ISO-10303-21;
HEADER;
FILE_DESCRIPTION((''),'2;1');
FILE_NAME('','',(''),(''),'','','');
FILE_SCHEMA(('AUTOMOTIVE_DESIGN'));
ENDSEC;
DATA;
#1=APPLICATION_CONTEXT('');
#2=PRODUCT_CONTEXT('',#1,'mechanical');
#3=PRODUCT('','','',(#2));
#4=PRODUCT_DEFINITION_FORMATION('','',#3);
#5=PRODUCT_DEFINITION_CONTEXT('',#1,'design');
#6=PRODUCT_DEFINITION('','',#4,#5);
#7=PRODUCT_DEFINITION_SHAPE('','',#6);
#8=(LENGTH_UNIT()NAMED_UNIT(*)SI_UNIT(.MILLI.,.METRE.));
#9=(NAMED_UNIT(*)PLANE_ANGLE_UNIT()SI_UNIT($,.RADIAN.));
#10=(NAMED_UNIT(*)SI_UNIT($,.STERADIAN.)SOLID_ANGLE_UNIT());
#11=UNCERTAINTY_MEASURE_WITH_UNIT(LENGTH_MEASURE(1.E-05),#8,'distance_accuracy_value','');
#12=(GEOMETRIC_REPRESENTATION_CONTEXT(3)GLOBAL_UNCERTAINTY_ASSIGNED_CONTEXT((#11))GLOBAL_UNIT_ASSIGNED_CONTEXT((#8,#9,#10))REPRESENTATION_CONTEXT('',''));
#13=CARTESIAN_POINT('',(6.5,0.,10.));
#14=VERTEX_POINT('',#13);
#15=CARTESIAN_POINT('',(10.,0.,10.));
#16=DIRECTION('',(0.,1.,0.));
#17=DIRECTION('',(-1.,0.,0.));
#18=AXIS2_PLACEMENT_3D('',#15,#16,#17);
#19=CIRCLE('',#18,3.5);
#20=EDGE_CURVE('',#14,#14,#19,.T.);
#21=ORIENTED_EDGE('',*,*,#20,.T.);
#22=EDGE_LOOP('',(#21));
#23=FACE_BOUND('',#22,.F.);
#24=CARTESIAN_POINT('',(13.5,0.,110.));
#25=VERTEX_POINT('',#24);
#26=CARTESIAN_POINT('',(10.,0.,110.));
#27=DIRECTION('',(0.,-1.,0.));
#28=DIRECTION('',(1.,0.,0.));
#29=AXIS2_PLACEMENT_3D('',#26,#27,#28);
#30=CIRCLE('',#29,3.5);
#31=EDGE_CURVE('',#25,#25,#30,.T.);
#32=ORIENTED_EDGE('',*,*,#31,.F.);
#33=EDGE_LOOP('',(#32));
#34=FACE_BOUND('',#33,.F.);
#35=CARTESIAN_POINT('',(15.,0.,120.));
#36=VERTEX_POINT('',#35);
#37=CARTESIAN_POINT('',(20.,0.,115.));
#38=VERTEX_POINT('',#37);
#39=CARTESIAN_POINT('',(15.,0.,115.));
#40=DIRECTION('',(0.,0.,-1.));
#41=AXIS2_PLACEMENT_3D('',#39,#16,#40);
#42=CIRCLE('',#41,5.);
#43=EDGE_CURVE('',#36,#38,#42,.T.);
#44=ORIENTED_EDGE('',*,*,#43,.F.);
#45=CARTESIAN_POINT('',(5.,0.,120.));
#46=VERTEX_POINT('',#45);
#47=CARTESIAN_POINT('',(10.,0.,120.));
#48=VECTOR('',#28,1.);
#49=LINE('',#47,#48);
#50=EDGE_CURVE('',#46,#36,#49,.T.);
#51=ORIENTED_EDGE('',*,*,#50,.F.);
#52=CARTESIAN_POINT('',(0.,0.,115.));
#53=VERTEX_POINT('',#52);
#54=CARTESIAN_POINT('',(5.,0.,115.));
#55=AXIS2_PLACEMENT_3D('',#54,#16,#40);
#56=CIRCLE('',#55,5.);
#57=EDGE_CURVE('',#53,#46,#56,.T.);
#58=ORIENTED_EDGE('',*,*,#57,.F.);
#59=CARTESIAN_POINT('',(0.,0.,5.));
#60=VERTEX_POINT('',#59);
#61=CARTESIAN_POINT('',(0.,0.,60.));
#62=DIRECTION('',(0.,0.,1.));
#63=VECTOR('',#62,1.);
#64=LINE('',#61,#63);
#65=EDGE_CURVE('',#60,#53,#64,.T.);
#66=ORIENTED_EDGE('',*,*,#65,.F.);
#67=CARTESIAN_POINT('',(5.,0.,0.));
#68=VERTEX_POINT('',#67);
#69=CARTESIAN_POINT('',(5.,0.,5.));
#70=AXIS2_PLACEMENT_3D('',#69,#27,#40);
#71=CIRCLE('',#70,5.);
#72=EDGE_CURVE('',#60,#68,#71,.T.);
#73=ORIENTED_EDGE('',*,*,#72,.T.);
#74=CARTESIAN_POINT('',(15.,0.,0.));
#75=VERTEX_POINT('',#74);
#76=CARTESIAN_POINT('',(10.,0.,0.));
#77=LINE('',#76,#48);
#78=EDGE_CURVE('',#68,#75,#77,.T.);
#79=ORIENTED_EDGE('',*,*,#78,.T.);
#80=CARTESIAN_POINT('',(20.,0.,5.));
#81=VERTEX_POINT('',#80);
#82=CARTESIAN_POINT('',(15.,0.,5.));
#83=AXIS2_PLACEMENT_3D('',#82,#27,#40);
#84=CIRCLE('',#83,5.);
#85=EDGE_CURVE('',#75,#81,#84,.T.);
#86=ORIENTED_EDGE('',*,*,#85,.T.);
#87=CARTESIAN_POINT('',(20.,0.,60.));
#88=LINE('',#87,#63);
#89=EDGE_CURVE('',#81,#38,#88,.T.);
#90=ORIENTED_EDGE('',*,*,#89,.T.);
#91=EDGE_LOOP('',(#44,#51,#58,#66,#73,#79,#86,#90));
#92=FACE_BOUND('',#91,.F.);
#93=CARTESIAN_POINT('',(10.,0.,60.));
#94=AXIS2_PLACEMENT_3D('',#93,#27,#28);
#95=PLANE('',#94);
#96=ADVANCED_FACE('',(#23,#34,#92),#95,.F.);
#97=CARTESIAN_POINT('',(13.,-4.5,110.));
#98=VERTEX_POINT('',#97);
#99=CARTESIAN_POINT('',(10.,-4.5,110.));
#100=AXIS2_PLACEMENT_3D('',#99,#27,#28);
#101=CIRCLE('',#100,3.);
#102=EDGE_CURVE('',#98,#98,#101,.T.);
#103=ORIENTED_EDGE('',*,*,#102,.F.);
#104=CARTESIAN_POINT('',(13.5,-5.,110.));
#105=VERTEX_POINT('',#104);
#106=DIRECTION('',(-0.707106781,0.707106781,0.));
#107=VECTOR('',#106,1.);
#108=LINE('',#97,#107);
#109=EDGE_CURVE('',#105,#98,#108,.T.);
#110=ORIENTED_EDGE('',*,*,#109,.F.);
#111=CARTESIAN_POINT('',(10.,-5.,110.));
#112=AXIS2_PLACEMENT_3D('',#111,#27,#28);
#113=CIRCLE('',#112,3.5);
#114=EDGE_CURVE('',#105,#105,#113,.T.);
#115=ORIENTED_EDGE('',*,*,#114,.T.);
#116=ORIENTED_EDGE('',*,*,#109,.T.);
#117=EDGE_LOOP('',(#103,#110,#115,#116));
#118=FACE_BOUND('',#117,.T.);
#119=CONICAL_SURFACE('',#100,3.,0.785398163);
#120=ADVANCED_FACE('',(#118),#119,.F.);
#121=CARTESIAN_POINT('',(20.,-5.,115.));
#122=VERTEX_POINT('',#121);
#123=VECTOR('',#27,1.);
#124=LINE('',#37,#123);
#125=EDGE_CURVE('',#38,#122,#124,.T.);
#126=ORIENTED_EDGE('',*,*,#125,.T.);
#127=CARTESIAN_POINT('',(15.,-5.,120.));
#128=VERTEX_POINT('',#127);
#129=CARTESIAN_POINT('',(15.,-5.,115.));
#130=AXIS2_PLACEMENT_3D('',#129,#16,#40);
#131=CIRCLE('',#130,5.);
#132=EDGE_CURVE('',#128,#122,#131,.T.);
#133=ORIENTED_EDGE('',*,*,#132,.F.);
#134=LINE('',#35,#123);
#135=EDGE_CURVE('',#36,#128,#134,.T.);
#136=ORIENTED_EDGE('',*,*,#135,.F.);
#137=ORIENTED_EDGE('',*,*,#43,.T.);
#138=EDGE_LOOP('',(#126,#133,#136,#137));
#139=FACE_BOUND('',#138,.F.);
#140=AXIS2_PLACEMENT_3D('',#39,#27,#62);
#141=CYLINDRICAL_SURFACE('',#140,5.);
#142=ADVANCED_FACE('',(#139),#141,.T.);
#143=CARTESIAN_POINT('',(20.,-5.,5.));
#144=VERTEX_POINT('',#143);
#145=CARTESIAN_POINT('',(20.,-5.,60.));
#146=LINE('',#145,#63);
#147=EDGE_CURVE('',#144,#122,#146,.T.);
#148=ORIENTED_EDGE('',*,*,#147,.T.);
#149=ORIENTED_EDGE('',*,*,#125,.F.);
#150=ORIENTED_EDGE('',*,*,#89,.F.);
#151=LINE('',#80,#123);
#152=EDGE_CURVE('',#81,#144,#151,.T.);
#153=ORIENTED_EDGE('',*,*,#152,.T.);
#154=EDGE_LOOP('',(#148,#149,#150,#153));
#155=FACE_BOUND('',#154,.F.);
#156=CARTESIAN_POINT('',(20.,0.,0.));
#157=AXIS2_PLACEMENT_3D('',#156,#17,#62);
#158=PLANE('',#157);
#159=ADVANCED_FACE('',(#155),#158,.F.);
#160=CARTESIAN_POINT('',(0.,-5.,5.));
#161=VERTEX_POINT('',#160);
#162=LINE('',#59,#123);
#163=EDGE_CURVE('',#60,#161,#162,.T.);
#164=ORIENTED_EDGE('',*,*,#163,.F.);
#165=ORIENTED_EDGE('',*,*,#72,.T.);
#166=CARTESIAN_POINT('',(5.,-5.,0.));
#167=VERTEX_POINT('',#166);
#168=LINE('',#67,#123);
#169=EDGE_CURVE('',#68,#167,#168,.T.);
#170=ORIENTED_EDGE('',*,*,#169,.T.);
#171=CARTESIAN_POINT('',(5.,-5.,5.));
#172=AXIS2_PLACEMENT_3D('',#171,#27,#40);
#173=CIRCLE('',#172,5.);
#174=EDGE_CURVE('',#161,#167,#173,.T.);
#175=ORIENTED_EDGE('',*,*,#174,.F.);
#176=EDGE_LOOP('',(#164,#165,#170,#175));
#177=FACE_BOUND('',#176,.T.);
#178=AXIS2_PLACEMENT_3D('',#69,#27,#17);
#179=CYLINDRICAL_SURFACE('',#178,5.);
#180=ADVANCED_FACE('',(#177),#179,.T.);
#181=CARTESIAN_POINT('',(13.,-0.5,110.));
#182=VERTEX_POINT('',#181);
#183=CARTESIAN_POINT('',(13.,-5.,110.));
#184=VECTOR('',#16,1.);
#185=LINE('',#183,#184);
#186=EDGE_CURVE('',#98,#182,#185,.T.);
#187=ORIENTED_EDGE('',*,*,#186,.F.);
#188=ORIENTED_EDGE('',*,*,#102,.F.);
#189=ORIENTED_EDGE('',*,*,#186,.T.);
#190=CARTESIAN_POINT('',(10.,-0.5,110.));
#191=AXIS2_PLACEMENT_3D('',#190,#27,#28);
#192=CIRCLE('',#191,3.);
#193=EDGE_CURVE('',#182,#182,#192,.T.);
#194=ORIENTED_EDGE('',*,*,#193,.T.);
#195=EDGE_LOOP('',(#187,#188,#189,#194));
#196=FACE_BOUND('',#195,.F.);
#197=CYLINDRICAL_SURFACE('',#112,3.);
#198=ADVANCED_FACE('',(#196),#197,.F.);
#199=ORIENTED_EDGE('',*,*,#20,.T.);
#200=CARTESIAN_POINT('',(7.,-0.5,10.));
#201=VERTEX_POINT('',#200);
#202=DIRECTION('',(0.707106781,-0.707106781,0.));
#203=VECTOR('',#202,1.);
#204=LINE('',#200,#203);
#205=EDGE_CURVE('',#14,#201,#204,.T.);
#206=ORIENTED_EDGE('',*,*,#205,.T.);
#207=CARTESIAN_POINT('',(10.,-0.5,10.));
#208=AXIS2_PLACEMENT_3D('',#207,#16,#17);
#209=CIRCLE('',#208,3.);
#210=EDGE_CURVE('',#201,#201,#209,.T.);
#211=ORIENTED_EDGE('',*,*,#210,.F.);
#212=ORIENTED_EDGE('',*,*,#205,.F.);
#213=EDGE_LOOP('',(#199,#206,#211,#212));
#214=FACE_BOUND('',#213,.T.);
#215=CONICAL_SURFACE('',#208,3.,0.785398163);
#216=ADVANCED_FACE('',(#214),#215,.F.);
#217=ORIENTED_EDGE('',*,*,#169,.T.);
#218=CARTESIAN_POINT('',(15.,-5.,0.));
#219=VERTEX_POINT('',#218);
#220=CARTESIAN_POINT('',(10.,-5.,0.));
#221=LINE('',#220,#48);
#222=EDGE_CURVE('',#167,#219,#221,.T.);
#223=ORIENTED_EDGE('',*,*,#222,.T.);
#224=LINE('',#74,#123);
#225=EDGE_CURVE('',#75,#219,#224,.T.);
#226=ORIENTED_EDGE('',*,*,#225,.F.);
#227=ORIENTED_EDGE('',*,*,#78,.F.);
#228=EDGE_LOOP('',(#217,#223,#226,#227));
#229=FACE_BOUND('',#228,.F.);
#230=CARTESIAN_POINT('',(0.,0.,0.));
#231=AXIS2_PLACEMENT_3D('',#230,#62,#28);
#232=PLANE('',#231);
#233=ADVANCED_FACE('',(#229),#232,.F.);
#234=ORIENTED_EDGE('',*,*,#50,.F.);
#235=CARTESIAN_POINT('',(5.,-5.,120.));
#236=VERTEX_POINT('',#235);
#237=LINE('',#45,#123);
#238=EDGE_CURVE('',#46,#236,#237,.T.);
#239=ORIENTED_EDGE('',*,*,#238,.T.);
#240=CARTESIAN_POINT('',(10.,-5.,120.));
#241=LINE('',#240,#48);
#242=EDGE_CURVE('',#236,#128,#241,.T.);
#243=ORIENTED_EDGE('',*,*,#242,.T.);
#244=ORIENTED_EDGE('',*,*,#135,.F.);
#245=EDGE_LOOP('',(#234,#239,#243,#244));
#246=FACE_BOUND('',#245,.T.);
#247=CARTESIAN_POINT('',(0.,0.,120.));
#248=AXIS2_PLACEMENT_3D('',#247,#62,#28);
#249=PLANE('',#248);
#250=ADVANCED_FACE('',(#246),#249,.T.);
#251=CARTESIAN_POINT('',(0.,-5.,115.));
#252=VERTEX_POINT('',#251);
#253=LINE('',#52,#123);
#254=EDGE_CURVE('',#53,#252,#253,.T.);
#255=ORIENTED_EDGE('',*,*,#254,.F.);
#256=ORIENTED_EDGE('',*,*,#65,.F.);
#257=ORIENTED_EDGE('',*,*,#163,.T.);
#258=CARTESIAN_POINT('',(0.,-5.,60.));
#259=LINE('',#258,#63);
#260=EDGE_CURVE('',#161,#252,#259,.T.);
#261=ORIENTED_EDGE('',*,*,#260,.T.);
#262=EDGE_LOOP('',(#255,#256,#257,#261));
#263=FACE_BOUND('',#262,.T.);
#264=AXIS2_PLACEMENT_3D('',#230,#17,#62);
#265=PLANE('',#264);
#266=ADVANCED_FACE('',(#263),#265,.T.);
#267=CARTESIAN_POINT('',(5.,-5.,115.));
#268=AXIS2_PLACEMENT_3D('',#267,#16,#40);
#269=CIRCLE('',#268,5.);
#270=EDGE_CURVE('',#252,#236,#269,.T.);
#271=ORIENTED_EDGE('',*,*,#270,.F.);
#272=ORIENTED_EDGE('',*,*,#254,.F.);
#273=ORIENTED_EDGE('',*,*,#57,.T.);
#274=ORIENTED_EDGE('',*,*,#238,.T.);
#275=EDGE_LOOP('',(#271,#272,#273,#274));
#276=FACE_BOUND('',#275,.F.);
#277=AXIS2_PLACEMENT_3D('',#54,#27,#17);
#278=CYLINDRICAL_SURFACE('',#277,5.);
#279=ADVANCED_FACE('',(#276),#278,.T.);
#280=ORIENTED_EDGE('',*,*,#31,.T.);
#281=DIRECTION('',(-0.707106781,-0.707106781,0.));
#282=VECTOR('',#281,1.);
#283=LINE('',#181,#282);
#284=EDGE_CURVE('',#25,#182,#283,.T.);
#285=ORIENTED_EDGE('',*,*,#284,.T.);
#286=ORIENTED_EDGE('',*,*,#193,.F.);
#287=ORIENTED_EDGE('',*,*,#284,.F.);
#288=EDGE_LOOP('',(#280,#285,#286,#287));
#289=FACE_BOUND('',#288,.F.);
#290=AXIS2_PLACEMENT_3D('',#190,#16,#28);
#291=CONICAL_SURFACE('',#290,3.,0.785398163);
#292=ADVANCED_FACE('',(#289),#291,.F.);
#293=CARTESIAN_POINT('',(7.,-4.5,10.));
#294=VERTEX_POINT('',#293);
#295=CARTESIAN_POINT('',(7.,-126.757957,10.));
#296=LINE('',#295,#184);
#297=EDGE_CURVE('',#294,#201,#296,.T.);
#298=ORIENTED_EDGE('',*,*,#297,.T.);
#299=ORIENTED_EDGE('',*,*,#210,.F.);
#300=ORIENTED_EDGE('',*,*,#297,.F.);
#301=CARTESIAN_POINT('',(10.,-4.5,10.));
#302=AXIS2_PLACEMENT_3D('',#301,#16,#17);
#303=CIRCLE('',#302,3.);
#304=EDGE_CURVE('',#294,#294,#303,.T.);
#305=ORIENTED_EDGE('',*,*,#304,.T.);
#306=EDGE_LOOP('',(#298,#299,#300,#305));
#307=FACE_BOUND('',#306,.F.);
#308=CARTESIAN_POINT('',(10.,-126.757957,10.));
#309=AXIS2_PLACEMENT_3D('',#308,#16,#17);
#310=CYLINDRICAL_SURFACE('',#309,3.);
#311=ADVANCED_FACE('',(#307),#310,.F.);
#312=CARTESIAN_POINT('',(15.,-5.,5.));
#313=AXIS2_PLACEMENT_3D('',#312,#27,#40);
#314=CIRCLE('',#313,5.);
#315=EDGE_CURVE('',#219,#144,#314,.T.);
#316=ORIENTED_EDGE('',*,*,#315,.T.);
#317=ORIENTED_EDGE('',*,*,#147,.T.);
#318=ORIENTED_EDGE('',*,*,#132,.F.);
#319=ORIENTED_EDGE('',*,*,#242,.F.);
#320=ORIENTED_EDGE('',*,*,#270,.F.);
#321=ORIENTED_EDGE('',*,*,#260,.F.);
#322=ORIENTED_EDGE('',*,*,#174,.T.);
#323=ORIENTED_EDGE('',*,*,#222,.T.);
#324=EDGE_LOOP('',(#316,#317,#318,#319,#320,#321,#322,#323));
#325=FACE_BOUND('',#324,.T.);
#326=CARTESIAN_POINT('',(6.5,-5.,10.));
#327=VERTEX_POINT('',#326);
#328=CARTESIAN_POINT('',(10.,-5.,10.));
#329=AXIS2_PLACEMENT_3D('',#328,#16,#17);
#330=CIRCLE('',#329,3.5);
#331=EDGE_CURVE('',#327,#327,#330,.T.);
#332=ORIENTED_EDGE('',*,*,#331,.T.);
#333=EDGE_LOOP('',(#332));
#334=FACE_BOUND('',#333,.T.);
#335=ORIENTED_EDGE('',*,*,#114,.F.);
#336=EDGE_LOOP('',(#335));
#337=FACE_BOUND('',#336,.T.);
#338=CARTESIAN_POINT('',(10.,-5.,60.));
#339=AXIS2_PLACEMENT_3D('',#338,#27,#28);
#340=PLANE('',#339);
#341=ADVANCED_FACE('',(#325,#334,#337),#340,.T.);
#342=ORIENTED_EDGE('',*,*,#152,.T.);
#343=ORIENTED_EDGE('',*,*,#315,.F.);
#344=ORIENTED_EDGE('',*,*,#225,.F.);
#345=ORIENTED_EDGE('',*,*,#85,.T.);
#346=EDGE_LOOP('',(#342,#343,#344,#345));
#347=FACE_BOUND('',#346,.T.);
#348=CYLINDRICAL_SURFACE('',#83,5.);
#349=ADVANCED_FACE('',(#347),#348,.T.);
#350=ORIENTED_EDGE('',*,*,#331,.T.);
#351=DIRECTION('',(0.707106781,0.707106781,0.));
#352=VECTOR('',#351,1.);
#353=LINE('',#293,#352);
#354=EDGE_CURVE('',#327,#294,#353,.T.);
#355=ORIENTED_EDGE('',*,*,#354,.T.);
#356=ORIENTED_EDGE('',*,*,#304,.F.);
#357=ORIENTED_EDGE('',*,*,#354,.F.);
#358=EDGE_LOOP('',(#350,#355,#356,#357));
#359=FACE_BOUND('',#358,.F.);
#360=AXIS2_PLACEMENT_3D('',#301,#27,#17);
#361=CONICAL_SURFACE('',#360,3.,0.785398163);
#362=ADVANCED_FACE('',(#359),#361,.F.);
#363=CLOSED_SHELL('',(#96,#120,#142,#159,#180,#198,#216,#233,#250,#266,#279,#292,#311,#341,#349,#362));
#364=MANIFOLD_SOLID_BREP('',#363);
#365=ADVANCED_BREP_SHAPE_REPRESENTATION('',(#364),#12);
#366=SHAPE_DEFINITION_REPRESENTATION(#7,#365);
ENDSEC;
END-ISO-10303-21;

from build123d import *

# Parameters (mm, degrees)
F0_W     = 20
F0_H     = 120
F1_DEPTH = 5
F2_R     = 3
F3_DEPTH = 5.001
F5_D     = 6
F6_SIZE  = 0.5
F7_R     = 5


with BuildPart() as f1:
    # F0 (on Front) → F1 (new body)
    with BuildSketch(Plane.XZ):
        with Locations((10, 60)):
            Rectangle(F0_W, F0_H)
    extrude(amount=F1_DEPTH)

    # F2 (on face) → F3 (cut, through all)
    with BuildSketch(Plane.XZ.offset(5)):
        with Locations((10, 110)):
            Circle(F2_R)
    extrude(amount=-F3_DEPTH, mode=Mode.SUBTRACT)

    # F5 (through all)
    with Locations(Plane.XZ.offset(5)):
        with Locations((10, 10)):
            Hole(F5_D / 2)

    # F6
    f6_edges = [f1.edges().sort_by_distance(p)[0] for p in [
        (7, -5, 110),
        (7, 0, 110),
        (7, 0, 10),
        (7, -5, 10),
    ]]
    chamfer(f6_edges, length=F6_SIZE)

    # F7
    f7_edges = [f1.edges().sort_by_distance(p)[0] for p in [
        (20, -2.5, 120),
        (0, -2.5, 120),
        (20, -2.5, 0),
        (0, -2.5, 0),
    ]]
    fillet(f7_edges, radius=F7_R)


solid = f1.part
